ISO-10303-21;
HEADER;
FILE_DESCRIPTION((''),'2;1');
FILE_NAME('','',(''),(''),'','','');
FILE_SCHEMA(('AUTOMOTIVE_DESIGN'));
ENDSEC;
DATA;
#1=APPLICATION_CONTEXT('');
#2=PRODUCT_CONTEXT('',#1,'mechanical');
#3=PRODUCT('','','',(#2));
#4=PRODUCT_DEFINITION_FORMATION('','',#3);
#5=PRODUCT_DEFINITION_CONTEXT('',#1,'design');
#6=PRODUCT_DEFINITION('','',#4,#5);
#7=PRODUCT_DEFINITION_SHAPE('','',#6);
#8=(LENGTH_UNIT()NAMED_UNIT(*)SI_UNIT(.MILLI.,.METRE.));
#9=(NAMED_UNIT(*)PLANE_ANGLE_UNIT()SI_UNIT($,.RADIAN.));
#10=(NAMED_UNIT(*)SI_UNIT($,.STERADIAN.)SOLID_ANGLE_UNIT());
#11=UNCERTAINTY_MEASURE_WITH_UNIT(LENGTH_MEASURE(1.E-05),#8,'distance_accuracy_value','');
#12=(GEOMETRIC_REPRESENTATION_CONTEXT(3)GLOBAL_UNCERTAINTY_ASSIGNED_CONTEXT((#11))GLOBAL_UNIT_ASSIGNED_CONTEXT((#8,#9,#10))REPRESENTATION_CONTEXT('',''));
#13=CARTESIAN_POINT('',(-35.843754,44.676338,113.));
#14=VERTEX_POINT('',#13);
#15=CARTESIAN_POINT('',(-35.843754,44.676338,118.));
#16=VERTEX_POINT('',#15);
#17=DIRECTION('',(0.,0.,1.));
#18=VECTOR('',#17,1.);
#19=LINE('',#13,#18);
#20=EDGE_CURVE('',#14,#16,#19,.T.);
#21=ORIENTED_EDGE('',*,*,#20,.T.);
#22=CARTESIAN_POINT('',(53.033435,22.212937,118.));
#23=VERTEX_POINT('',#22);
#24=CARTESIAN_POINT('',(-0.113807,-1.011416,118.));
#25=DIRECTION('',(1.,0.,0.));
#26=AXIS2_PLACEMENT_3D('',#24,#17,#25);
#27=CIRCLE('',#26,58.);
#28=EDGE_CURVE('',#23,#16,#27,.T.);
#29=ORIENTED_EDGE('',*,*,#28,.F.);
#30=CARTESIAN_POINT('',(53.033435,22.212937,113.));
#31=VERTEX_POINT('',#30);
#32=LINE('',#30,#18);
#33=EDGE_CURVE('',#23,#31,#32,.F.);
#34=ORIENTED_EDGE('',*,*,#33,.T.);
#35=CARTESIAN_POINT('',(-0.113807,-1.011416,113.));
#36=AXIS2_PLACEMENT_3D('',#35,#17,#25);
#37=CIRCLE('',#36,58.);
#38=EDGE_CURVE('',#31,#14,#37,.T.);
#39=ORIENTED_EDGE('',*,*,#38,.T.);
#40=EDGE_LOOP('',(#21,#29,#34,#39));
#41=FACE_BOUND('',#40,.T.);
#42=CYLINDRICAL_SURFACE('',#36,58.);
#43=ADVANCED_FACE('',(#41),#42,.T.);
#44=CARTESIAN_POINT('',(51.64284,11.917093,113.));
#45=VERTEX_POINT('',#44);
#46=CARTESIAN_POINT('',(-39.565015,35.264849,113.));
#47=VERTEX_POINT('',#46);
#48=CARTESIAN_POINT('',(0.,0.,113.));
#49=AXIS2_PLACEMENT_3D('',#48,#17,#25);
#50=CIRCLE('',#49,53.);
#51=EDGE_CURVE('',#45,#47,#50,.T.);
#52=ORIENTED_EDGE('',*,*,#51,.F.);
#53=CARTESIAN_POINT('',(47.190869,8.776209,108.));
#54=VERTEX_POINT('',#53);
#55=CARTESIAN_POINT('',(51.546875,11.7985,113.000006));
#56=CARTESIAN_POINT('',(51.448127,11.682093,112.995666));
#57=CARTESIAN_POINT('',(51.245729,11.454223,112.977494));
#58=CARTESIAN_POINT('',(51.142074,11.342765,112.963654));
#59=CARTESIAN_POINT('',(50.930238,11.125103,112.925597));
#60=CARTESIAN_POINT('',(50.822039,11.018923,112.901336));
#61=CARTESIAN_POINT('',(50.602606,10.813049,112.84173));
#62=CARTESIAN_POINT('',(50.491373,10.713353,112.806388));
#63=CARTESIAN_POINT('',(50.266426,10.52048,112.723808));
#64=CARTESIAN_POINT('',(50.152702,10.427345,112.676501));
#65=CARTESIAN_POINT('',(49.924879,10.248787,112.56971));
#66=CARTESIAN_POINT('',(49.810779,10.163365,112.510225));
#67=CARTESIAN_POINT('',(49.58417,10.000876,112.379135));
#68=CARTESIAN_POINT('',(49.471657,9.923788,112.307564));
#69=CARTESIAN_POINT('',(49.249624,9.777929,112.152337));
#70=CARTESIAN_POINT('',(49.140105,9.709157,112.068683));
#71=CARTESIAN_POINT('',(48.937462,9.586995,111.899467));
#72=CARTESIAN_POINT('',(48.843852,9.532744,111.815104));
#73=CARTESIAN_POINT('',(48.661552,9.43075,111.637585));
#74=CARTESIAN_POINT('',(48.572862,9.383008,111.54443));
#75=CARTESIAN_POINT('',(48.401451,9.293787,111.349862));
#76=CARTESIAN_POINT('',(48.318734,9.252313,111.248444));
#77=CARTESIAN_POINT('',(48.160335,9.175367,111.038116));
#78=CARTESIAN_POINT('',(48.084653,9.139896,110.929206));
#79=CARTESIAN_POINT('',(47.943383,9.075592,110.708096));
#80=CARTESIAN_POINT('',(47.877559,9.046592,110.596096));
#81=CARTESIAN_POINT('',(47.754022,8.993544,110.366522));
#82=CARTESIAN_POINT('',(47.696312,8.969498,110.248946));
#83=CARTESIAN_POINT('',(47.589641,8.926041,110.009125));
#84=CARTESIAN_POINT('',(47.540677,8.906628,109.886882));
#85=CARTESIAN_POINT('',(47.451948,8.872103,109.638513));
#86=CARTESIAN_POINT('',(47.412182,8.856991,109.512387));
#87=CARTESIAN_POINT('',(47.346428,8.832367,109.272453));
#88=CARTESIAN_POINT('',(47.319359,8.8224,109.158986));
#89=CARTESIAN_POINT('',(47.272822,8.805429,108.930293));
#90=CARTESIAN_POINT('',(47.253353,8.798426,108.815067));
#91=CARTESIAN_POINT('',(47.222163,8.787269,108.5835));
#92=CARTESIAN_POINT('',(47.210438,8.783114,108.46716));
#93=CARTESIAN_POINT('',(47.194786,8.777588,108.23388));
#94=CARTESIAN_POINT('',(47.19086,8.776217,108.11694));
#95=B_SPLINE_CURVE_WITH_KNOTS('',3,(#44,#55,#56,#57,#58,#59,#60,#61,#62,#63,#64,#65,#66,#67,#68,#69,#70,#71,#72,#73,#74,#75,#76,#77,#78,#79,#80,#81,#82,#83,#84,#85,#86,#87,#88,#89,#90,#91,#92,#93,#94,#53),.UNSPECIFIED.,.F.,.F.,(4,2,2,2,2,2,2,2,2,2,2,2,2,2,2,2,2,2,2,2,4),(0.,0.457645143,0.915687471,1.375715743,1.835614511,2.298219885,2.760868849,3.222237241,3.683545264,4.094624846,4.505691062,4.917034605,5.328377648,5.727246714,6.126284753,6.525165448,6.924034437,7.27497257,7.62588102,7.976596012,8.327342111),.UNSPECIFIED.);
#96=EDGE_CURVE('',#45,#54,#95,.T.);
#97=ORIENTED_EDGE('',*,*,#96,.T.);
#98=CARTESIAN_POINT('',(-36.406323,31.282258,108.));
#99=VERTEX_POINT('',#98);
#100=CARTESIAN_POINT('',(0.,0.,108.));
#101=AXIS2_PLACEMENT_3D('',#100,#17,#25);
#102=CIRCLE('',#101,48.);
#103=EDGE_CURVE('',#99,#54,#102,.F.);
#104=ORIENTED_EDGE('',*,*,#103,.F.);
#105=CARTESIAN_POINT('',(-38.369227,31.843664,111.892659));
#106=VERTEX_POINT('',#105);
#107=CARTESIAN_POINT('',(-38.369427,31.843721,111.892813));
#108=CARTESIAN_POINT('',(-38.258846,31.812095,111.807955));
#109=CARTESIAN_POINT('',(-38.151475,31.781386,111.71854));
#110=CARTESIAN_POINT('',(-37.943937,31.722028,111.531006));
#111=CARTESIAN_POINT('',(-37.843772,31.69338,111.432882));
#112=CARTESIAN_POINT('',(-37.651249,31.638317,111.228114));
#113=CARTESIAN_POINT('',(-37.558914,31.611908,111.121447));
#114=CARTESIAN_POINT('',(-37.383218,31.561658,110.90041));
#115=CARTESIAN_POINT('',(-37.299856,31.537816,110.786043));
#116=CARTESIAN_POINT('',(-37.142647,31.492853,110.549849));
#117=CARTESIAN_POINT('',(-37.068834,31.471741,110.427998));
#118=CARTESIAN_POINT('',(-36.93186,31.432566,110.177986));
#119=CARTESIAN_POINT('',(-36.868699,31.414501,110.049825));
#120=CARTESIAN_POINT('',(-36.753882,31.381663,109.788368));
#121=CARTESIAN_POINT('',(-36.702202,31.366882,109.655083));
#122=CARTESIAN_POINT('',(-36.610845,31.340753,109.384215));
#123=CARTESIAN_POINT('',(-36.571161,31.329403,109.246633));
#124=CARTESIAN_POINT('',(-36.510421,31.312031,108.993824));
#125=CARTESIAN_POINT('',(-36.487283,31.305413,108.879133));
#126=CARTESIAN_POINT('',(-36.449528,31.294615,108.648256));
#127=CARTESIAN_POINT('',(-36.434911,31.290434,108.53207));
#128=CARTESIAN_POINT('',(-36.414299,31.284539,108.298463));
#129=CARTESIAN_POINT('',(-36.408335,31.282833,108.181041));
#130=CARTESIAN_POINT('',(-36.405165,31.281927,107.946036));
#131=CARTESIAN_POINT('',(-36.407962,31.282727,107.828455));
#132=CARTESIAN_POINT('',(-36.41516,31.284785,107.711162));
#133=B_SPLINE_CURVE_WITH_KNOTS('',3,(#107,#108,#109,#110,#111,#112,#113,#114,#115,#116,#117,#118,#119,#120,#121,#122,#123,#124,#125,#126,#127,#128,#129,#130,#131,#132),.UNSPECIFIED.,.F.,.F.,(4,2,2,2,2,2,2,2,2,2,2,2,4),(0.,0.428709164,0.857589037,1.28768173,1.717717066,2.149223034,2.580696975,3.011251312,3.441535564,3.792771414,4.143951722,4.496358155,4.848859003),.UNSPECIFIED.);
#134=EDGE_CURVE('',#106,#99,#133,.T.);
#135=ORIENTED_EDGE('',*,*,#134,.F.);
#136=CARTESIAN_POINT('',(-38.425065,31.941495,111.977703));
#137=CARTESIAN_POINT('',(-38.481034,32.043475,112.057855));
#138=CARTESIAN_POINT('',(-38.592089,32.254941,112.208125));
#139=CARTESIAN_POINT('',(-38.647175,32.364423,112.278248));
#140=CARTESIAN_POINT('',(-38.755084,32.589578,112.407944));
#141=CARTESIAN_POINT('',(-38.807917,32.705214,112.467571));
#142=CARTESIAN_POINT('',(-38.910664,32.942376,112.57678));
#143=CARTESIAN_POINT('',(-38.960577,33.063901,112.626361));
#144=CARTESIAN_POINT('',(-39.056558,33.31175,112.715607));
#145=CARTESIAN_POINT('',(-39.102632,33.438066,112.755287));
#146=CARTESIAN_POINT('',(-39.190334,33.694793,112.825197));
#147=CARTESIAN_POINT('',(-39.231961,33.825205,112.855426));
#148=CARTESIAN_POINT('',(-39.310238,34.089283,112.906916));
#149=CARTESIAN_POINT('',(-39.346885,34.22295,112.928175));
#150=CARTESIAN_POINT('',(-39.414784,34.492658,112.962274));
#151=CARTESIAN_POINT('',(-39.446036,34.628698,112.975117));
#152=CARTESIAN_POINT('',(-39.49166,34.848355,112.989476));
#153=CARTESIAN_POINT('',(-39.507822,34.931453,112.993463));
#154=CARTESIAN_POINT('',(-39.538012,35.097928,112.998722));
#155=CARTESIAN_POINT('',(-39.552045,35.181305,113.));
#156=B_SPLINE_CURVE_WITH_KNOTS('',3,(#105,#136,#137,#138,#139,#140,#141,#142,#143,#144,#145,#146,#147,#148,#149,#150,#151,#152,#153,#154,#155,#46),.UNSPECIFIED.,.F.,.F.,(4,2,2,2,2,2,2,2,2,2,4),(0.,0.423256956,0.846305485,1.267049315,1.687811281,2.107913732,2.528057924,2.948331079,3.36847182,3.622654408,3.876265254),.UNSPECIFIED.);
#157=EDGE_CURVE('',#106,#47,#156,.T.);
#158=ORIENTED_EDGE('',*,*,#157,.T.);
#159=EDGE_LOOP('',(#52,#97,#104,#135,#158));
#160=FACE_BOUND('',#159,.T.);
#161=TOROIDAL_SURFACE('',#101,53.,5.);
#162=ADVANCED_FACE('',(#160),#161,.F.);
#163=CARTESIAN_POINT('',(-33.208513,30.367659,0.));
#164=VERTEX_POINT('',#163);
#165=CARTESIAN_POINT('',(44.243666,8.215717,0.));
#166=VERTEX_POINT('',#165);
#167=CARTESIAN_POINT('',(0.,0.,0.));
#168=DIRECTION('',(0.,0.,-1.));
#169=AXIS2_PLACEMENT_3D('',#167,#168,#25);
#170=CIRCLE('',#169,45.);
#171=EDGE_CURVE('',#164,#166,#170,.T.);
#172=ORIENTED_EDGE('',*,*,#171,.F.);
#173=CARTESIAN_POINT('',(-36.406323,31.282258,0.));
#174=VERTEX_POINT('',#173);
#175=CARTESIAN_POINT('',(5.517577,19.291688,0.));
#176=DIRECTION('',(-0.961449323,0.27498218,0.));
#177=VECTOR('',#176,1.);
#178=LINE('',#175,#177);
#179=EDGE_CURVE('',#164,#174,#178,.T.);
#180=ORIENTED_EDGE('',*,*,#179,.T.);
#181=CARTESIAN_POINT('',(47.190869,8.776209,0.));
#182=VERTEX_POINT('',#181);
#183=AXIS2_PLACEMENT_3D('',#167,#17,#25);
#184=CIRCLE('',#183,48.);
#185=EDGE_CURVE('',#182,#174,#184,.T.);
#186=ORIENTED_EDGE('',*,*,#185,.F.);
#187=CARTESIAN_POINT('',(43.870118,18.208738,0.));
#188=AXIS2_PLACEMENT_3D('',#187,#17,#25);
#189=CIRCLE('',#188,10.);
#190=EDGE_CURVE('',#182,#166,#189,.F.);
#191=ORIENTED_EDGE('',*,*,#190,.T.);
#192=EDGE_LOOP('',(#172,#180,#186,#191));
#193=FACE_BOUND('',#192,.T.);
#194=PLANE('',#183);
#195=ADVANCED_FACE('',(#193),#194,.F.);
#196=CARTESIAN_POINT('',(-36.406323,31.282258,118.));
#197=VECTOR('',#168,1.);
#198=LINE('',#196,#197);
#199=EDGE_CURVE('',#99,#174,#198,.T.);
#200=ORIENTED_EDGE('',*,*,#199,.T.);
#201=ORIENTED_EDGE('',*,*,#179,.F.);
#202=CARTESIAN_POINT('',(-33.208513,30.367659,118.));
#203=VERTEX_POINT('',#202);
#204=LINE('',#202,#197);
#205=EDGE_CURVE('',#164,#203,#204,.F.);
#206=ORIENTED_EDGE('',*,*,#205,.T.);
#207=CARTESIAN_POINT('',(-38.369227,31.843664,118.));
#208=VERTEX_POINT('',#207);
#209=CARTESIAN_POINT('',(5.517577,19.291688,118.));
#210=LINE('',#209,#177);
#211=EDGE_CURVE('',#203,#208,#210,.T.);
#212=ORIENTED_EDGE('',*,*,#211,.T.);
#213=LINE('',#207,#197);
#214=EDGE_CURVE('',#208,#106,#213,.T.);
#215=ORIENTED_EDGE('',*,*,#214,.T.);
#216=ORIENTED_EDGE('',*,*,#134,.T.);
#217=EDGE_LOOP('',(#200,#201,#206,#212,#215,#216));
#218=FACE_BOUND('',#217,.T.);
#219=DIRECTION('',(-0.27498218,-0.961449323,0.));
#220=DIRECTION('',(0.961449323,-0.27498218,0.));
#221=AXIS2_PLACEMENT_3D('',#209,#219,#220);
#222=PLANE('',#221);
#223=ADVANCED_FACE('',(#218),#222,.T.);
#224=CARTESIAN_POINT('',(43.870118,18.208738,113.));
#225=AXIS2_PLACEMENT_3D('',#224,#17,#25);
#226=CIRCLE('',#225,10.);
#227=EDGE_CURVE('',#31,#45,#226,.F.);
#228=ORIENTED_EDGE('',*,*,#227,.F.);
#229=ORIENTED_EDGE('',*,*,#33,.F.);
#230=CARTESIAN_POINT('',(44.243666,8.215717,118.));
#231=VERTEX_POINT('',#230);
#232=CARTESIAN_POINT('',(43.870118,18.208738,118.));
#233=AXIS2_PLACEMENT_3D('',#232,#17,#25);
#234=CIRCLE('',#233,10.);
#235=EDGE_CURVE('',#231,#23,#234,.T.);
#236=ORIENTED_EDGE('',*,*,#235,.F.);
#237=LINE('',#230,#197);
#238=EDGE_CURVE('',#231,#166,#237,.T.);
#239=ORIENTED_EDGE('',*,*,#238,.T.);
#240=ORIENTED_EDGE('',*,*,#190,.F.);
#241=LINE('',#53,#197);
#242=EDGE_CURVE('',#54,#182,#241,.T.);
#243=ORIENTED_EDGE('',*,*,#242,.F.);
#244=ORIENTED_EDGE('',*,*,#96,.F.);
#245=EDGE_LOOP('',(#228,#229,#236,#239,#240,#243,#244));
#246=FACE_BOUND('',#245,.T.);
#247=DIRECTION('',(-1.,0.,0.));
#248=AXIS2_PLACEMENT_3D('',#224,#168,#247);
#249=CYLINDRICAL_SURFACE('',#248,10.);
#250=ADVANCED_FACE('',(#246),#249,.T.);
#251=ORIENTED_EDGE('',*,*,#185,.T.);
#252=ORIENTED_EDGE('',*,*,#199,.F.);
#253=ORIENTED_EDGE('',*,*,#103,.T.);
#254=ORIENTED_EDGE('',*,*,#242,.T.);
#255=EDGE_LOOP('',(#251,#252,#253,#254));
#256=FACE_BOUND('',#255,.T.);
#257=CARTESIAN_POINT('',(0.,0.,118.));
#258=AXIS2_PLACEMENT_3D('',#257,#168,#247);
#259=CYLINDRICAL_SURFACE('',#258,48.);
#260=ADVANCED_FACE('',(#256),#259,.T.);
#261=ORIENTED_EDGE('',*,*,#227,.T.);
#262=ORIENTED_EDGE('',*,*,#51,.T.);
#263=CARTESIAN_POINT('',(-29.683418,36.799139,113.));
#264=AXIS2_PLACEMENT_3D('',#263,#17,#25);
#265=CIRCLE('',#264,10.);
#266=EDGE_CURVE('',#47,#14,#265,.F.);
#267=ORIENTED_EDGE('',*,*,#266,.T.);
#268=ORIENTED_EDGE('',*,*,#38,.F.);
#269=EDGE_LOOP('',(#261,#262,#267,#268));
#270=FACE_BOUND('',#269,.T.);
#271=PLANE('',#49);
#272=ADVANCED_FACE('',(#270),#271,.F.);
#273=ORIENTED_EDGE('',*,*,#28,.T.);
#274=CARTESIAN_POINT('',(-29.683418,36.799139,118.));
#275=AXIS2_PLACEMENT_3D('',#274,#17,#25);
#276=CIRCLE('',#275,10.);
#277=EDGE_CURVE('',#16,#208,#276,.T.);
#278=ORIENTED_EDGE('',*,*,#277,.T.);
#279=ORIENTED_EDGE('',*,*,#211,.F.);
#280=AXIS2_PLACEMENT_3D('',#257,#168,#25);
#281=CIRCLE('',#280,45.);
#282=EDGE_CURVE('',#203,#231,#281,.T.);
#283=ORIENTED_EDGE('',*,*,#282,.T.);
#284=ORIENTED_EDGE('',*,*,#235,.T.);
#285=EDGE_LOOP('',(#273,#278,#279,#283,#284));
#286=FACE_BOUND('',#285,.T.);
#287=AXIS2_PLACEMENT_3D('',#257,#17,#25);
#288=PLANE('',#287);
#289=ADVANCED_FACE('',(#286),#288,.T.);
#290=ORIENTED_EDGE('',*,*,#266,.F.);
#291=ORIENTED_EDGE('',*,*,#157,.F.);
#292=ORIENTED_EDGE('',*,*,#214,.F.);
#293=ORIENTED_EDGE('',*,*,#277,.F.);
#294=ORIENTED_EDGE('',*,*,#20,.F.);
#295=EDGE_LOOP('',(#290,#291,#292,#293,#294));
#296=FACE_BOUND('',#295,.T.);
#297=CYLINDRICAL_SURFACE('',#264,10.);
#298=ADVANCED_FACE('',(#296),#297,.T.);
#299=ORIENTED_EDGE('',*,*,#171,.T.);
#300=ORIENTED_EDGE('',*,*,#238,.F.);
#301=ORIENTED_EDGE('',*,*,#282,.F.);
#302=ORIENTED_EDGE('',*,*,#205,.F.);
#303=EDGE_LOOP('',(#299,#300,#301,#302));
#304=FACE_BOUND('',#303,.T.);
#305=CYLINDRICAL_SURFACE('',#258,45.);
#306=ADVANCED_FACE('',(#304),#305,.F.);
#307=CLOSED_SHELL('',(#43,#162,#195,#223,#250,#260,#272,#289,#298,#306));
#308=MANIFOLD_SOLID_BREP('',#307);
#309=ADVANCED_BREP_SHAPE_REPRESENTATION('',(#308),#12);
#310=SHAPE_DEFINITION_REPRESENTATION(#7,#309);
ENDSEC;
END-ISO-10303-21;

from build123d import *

# Parameters (mm, degrees)
BOSS_EXTRU_1_DEPTH      = 118
BOSS_EXTRU_2_START      = -5
BOSS_EXTRU_2_DEPTH      = 5
CONG_1_R                = 5
ENL_V_MAT_EXTRU_2_DEPTH = 144.326668003
CONG_2_R                = 10
CONG_3_START            = -1
CONG_3_DEPTH            = 119


with BuildPart() as part:
    # Esquisse1 → Boss.-Extru.1 (new body)
    with BuildSketch(Plane.XY):
        with BuildLine():
            Line((-48, 0), (-44.998214382, -0.400877025))
            ThreePointArc((-44.998214382, -0.400877025), (5.956695581, 44.604010781), (43.316094217, -12.194916228))
            Line((43.316094217, -12.194916228), (46.317879834, -12.595793253))
            ThreePointArc((46.317879834, -12.595793253), (6.35380862, 47.5776115), (-48, 0))
        make_face()
    extrude(amount=BOSS_EXTRU_1_DEPTH)

    # Esquisse2 → Boss.-Extru.2 (add)
    with BuildSketch(Plane.XY.offset(118).offset(BOSS_EXTRU_2_START)):
        with BuildLine():
            Line((-58.058892958, 1.511889338), (-47.999984368, 0.038739081))
            ThreePointArc((-47.999984368, 0.038739081), (6.373007198, 47.57504366), (46.317879834, -12.595793253))
            Line((46.317879834, -12.595793253), (43.316094217, -12.194916228))
            Line((43.316094217, -12.194916228), (56.371627647, -14.179393207))
            ThreePointArc((56.371627647, -14.179393207), (7.76570592, 56.450860633), (-58.058892958, 1.511889338))
        make_face()
    extrude(amount=BOSS_EXTRU_2_DEPTH)

    # Congé1
    cong_1_edges = [part.edges().sort_by_distance(p)[0] for p in [
        (6.373007198, 47.57504366, 113),
    ]]
    fillet(cong_1_edges, radius=CONG_1_R)

    # Esquisse4 → Enlèv. mat.-Extru.2 (cut, through all)
    with BuildSketch(Plane(origin=(0, 0, 0), x_dir=(-1, 0, 0), z_dir=(0, 0, -1))):
        with BuildLine():
            ThreePointArc((-43.316094217, -12.194916228), (-44.953602713, -2.042939819), (-44.243666063, 8.215717453))
            Line((-44.243666063, 8.215717453), (-47.362132256, 7.799258183))
            ThreePointArc((-47.362132256, 7.799258183), (-47.93720577, -2.454445548), (-46.317879834, -12.595793253))
            Line((-46.317879834, -12.595793253), (-43.316094217, -12.194916228))
        make_face()
        with BuildLine():
            Line((33.208512529, 30.367658711), (-44.243666063, 8.215717453))
            ThreePointArc((-44.243666063, 8.215717453), (-44.953602713, -2.042939819), (-43.316094217, -12.194916228))
            Line((-43.316094217, -12.194916228), (-46.317879834, -12.595793253))
            ThreePointArc((-46.317879834, -12.595793253), (-47.93720577, -2.454445548), (-47.362132256, 7.799258183))
            Line((-47.362132256, 7.799258183), (-114.354421373, -1.147306612))
            Line((-114.354421373, -1.147306612), (-106.599475071, -56.082579824))
            Line((-106.599475071, -56.082579824), (62.827216074, -36.566785192))
            Line((62.827216074, -36.566785192), (101.490219992, -28.614943218))
            Line((101.490219992, -28.614943218), (87.117247585, 24.85835748))
            Line((87.117247585, 24.85835748), (83.033473236, 40.051658321))
            Line((83.033473236, 40.051658321), (38.369226529, 31.843664105))
            Line((38.369226529, 31.843664105), (36.40632276, 31.28225796))
            ThreePointArc((36.40632276, 31.28225796), (45.008351961, 16.680774975), (48, 0))
            Line((48, 0), (44.998214382, -0.400877025))
            ThreePointArc((44.998214382, -0.400877025), (42.020813074, 16.101281583), (33.208512529, 30.367658711))
        make_face()
        with BuildLine():
            Line((36.186144751, 31.219285292), (33.208512529, 30.367658711))
            ThreePointArc((33.208512529, 30.367658711), (42.020813074, 16.101281583), (44.998214382, -0.400877025))
            Line((44.998214382, -0.400877025), (48, 0))
            ThreePointArc((48, 0), (45.008351961, 16.680774975), (36.40632276, 31.28225796))
            Line((36.40632276, 31.28225796), (36.186144751, 31.219285292))
        make_face()
    extrude(amount=-ENL_V_MAT_EXTRU_2_DEPTH, mode=Mode.SUBTRACT)

    # Congé2
    # the kernel refuses this fillet: 10 mm, written as the material it takes off along each edge
    with BuildSketch(Plane(origin=(-46.806940355, 33.394271389, 157.328464208), x_dir=(0.6968989711094409, 0.7171693133888278, 0), z_dir=(0, 0, -1))) as cong_2_piece_1:
        with BuildLine():
            CenterArc((14.375231745, 9.907615581), CONG_2_R, 196.115404214, 81.678802413)
            Line((4.768186123, 7.131886052), (4.57604521, 7.076371462))
            ThreePointArc((4.57604521, 7.076371462), (2.21782943, 3.677102393), (-0.166263631, 0.111159367))
            Line((-0.166263631, 0.111159367), (-0.027123079, -0.198152312))
            ThreePointArc((-0.027123079, -0.198152312), (7.865692842, -0.735829632), (15.758508762, -0.198152312))
            Line((15.758508762, -0.198152312), (15.731385683, 0))
        make_face()
    extrude(amount=83.656928416, mode=Mode.SUBTRACT)

    # Congé3: read off the stored shape, not the designer's step
    # Congé3 outline → Congé3 (cut)
    with BuildSketch(Plane.XY.offset(CONG_3_START)):
        with BuildLine():
            ThreePointArc((57.403173546, 6.458315401), (55.776215181, 14.490369578), (53.03343531, 22.212936923))
            ThreePointArc((53.03343531, 22.212936923), (52.338794722, 12.890702035), (44.243666063, 8.215717453))
            Line((44.243666063, 8.215717453), (57.403173546, 6.458315401))
        make_face()
    extrude(amount=CONG_3_DEPTH, mode=Mode.SUBTRACT)


solid = part.part
